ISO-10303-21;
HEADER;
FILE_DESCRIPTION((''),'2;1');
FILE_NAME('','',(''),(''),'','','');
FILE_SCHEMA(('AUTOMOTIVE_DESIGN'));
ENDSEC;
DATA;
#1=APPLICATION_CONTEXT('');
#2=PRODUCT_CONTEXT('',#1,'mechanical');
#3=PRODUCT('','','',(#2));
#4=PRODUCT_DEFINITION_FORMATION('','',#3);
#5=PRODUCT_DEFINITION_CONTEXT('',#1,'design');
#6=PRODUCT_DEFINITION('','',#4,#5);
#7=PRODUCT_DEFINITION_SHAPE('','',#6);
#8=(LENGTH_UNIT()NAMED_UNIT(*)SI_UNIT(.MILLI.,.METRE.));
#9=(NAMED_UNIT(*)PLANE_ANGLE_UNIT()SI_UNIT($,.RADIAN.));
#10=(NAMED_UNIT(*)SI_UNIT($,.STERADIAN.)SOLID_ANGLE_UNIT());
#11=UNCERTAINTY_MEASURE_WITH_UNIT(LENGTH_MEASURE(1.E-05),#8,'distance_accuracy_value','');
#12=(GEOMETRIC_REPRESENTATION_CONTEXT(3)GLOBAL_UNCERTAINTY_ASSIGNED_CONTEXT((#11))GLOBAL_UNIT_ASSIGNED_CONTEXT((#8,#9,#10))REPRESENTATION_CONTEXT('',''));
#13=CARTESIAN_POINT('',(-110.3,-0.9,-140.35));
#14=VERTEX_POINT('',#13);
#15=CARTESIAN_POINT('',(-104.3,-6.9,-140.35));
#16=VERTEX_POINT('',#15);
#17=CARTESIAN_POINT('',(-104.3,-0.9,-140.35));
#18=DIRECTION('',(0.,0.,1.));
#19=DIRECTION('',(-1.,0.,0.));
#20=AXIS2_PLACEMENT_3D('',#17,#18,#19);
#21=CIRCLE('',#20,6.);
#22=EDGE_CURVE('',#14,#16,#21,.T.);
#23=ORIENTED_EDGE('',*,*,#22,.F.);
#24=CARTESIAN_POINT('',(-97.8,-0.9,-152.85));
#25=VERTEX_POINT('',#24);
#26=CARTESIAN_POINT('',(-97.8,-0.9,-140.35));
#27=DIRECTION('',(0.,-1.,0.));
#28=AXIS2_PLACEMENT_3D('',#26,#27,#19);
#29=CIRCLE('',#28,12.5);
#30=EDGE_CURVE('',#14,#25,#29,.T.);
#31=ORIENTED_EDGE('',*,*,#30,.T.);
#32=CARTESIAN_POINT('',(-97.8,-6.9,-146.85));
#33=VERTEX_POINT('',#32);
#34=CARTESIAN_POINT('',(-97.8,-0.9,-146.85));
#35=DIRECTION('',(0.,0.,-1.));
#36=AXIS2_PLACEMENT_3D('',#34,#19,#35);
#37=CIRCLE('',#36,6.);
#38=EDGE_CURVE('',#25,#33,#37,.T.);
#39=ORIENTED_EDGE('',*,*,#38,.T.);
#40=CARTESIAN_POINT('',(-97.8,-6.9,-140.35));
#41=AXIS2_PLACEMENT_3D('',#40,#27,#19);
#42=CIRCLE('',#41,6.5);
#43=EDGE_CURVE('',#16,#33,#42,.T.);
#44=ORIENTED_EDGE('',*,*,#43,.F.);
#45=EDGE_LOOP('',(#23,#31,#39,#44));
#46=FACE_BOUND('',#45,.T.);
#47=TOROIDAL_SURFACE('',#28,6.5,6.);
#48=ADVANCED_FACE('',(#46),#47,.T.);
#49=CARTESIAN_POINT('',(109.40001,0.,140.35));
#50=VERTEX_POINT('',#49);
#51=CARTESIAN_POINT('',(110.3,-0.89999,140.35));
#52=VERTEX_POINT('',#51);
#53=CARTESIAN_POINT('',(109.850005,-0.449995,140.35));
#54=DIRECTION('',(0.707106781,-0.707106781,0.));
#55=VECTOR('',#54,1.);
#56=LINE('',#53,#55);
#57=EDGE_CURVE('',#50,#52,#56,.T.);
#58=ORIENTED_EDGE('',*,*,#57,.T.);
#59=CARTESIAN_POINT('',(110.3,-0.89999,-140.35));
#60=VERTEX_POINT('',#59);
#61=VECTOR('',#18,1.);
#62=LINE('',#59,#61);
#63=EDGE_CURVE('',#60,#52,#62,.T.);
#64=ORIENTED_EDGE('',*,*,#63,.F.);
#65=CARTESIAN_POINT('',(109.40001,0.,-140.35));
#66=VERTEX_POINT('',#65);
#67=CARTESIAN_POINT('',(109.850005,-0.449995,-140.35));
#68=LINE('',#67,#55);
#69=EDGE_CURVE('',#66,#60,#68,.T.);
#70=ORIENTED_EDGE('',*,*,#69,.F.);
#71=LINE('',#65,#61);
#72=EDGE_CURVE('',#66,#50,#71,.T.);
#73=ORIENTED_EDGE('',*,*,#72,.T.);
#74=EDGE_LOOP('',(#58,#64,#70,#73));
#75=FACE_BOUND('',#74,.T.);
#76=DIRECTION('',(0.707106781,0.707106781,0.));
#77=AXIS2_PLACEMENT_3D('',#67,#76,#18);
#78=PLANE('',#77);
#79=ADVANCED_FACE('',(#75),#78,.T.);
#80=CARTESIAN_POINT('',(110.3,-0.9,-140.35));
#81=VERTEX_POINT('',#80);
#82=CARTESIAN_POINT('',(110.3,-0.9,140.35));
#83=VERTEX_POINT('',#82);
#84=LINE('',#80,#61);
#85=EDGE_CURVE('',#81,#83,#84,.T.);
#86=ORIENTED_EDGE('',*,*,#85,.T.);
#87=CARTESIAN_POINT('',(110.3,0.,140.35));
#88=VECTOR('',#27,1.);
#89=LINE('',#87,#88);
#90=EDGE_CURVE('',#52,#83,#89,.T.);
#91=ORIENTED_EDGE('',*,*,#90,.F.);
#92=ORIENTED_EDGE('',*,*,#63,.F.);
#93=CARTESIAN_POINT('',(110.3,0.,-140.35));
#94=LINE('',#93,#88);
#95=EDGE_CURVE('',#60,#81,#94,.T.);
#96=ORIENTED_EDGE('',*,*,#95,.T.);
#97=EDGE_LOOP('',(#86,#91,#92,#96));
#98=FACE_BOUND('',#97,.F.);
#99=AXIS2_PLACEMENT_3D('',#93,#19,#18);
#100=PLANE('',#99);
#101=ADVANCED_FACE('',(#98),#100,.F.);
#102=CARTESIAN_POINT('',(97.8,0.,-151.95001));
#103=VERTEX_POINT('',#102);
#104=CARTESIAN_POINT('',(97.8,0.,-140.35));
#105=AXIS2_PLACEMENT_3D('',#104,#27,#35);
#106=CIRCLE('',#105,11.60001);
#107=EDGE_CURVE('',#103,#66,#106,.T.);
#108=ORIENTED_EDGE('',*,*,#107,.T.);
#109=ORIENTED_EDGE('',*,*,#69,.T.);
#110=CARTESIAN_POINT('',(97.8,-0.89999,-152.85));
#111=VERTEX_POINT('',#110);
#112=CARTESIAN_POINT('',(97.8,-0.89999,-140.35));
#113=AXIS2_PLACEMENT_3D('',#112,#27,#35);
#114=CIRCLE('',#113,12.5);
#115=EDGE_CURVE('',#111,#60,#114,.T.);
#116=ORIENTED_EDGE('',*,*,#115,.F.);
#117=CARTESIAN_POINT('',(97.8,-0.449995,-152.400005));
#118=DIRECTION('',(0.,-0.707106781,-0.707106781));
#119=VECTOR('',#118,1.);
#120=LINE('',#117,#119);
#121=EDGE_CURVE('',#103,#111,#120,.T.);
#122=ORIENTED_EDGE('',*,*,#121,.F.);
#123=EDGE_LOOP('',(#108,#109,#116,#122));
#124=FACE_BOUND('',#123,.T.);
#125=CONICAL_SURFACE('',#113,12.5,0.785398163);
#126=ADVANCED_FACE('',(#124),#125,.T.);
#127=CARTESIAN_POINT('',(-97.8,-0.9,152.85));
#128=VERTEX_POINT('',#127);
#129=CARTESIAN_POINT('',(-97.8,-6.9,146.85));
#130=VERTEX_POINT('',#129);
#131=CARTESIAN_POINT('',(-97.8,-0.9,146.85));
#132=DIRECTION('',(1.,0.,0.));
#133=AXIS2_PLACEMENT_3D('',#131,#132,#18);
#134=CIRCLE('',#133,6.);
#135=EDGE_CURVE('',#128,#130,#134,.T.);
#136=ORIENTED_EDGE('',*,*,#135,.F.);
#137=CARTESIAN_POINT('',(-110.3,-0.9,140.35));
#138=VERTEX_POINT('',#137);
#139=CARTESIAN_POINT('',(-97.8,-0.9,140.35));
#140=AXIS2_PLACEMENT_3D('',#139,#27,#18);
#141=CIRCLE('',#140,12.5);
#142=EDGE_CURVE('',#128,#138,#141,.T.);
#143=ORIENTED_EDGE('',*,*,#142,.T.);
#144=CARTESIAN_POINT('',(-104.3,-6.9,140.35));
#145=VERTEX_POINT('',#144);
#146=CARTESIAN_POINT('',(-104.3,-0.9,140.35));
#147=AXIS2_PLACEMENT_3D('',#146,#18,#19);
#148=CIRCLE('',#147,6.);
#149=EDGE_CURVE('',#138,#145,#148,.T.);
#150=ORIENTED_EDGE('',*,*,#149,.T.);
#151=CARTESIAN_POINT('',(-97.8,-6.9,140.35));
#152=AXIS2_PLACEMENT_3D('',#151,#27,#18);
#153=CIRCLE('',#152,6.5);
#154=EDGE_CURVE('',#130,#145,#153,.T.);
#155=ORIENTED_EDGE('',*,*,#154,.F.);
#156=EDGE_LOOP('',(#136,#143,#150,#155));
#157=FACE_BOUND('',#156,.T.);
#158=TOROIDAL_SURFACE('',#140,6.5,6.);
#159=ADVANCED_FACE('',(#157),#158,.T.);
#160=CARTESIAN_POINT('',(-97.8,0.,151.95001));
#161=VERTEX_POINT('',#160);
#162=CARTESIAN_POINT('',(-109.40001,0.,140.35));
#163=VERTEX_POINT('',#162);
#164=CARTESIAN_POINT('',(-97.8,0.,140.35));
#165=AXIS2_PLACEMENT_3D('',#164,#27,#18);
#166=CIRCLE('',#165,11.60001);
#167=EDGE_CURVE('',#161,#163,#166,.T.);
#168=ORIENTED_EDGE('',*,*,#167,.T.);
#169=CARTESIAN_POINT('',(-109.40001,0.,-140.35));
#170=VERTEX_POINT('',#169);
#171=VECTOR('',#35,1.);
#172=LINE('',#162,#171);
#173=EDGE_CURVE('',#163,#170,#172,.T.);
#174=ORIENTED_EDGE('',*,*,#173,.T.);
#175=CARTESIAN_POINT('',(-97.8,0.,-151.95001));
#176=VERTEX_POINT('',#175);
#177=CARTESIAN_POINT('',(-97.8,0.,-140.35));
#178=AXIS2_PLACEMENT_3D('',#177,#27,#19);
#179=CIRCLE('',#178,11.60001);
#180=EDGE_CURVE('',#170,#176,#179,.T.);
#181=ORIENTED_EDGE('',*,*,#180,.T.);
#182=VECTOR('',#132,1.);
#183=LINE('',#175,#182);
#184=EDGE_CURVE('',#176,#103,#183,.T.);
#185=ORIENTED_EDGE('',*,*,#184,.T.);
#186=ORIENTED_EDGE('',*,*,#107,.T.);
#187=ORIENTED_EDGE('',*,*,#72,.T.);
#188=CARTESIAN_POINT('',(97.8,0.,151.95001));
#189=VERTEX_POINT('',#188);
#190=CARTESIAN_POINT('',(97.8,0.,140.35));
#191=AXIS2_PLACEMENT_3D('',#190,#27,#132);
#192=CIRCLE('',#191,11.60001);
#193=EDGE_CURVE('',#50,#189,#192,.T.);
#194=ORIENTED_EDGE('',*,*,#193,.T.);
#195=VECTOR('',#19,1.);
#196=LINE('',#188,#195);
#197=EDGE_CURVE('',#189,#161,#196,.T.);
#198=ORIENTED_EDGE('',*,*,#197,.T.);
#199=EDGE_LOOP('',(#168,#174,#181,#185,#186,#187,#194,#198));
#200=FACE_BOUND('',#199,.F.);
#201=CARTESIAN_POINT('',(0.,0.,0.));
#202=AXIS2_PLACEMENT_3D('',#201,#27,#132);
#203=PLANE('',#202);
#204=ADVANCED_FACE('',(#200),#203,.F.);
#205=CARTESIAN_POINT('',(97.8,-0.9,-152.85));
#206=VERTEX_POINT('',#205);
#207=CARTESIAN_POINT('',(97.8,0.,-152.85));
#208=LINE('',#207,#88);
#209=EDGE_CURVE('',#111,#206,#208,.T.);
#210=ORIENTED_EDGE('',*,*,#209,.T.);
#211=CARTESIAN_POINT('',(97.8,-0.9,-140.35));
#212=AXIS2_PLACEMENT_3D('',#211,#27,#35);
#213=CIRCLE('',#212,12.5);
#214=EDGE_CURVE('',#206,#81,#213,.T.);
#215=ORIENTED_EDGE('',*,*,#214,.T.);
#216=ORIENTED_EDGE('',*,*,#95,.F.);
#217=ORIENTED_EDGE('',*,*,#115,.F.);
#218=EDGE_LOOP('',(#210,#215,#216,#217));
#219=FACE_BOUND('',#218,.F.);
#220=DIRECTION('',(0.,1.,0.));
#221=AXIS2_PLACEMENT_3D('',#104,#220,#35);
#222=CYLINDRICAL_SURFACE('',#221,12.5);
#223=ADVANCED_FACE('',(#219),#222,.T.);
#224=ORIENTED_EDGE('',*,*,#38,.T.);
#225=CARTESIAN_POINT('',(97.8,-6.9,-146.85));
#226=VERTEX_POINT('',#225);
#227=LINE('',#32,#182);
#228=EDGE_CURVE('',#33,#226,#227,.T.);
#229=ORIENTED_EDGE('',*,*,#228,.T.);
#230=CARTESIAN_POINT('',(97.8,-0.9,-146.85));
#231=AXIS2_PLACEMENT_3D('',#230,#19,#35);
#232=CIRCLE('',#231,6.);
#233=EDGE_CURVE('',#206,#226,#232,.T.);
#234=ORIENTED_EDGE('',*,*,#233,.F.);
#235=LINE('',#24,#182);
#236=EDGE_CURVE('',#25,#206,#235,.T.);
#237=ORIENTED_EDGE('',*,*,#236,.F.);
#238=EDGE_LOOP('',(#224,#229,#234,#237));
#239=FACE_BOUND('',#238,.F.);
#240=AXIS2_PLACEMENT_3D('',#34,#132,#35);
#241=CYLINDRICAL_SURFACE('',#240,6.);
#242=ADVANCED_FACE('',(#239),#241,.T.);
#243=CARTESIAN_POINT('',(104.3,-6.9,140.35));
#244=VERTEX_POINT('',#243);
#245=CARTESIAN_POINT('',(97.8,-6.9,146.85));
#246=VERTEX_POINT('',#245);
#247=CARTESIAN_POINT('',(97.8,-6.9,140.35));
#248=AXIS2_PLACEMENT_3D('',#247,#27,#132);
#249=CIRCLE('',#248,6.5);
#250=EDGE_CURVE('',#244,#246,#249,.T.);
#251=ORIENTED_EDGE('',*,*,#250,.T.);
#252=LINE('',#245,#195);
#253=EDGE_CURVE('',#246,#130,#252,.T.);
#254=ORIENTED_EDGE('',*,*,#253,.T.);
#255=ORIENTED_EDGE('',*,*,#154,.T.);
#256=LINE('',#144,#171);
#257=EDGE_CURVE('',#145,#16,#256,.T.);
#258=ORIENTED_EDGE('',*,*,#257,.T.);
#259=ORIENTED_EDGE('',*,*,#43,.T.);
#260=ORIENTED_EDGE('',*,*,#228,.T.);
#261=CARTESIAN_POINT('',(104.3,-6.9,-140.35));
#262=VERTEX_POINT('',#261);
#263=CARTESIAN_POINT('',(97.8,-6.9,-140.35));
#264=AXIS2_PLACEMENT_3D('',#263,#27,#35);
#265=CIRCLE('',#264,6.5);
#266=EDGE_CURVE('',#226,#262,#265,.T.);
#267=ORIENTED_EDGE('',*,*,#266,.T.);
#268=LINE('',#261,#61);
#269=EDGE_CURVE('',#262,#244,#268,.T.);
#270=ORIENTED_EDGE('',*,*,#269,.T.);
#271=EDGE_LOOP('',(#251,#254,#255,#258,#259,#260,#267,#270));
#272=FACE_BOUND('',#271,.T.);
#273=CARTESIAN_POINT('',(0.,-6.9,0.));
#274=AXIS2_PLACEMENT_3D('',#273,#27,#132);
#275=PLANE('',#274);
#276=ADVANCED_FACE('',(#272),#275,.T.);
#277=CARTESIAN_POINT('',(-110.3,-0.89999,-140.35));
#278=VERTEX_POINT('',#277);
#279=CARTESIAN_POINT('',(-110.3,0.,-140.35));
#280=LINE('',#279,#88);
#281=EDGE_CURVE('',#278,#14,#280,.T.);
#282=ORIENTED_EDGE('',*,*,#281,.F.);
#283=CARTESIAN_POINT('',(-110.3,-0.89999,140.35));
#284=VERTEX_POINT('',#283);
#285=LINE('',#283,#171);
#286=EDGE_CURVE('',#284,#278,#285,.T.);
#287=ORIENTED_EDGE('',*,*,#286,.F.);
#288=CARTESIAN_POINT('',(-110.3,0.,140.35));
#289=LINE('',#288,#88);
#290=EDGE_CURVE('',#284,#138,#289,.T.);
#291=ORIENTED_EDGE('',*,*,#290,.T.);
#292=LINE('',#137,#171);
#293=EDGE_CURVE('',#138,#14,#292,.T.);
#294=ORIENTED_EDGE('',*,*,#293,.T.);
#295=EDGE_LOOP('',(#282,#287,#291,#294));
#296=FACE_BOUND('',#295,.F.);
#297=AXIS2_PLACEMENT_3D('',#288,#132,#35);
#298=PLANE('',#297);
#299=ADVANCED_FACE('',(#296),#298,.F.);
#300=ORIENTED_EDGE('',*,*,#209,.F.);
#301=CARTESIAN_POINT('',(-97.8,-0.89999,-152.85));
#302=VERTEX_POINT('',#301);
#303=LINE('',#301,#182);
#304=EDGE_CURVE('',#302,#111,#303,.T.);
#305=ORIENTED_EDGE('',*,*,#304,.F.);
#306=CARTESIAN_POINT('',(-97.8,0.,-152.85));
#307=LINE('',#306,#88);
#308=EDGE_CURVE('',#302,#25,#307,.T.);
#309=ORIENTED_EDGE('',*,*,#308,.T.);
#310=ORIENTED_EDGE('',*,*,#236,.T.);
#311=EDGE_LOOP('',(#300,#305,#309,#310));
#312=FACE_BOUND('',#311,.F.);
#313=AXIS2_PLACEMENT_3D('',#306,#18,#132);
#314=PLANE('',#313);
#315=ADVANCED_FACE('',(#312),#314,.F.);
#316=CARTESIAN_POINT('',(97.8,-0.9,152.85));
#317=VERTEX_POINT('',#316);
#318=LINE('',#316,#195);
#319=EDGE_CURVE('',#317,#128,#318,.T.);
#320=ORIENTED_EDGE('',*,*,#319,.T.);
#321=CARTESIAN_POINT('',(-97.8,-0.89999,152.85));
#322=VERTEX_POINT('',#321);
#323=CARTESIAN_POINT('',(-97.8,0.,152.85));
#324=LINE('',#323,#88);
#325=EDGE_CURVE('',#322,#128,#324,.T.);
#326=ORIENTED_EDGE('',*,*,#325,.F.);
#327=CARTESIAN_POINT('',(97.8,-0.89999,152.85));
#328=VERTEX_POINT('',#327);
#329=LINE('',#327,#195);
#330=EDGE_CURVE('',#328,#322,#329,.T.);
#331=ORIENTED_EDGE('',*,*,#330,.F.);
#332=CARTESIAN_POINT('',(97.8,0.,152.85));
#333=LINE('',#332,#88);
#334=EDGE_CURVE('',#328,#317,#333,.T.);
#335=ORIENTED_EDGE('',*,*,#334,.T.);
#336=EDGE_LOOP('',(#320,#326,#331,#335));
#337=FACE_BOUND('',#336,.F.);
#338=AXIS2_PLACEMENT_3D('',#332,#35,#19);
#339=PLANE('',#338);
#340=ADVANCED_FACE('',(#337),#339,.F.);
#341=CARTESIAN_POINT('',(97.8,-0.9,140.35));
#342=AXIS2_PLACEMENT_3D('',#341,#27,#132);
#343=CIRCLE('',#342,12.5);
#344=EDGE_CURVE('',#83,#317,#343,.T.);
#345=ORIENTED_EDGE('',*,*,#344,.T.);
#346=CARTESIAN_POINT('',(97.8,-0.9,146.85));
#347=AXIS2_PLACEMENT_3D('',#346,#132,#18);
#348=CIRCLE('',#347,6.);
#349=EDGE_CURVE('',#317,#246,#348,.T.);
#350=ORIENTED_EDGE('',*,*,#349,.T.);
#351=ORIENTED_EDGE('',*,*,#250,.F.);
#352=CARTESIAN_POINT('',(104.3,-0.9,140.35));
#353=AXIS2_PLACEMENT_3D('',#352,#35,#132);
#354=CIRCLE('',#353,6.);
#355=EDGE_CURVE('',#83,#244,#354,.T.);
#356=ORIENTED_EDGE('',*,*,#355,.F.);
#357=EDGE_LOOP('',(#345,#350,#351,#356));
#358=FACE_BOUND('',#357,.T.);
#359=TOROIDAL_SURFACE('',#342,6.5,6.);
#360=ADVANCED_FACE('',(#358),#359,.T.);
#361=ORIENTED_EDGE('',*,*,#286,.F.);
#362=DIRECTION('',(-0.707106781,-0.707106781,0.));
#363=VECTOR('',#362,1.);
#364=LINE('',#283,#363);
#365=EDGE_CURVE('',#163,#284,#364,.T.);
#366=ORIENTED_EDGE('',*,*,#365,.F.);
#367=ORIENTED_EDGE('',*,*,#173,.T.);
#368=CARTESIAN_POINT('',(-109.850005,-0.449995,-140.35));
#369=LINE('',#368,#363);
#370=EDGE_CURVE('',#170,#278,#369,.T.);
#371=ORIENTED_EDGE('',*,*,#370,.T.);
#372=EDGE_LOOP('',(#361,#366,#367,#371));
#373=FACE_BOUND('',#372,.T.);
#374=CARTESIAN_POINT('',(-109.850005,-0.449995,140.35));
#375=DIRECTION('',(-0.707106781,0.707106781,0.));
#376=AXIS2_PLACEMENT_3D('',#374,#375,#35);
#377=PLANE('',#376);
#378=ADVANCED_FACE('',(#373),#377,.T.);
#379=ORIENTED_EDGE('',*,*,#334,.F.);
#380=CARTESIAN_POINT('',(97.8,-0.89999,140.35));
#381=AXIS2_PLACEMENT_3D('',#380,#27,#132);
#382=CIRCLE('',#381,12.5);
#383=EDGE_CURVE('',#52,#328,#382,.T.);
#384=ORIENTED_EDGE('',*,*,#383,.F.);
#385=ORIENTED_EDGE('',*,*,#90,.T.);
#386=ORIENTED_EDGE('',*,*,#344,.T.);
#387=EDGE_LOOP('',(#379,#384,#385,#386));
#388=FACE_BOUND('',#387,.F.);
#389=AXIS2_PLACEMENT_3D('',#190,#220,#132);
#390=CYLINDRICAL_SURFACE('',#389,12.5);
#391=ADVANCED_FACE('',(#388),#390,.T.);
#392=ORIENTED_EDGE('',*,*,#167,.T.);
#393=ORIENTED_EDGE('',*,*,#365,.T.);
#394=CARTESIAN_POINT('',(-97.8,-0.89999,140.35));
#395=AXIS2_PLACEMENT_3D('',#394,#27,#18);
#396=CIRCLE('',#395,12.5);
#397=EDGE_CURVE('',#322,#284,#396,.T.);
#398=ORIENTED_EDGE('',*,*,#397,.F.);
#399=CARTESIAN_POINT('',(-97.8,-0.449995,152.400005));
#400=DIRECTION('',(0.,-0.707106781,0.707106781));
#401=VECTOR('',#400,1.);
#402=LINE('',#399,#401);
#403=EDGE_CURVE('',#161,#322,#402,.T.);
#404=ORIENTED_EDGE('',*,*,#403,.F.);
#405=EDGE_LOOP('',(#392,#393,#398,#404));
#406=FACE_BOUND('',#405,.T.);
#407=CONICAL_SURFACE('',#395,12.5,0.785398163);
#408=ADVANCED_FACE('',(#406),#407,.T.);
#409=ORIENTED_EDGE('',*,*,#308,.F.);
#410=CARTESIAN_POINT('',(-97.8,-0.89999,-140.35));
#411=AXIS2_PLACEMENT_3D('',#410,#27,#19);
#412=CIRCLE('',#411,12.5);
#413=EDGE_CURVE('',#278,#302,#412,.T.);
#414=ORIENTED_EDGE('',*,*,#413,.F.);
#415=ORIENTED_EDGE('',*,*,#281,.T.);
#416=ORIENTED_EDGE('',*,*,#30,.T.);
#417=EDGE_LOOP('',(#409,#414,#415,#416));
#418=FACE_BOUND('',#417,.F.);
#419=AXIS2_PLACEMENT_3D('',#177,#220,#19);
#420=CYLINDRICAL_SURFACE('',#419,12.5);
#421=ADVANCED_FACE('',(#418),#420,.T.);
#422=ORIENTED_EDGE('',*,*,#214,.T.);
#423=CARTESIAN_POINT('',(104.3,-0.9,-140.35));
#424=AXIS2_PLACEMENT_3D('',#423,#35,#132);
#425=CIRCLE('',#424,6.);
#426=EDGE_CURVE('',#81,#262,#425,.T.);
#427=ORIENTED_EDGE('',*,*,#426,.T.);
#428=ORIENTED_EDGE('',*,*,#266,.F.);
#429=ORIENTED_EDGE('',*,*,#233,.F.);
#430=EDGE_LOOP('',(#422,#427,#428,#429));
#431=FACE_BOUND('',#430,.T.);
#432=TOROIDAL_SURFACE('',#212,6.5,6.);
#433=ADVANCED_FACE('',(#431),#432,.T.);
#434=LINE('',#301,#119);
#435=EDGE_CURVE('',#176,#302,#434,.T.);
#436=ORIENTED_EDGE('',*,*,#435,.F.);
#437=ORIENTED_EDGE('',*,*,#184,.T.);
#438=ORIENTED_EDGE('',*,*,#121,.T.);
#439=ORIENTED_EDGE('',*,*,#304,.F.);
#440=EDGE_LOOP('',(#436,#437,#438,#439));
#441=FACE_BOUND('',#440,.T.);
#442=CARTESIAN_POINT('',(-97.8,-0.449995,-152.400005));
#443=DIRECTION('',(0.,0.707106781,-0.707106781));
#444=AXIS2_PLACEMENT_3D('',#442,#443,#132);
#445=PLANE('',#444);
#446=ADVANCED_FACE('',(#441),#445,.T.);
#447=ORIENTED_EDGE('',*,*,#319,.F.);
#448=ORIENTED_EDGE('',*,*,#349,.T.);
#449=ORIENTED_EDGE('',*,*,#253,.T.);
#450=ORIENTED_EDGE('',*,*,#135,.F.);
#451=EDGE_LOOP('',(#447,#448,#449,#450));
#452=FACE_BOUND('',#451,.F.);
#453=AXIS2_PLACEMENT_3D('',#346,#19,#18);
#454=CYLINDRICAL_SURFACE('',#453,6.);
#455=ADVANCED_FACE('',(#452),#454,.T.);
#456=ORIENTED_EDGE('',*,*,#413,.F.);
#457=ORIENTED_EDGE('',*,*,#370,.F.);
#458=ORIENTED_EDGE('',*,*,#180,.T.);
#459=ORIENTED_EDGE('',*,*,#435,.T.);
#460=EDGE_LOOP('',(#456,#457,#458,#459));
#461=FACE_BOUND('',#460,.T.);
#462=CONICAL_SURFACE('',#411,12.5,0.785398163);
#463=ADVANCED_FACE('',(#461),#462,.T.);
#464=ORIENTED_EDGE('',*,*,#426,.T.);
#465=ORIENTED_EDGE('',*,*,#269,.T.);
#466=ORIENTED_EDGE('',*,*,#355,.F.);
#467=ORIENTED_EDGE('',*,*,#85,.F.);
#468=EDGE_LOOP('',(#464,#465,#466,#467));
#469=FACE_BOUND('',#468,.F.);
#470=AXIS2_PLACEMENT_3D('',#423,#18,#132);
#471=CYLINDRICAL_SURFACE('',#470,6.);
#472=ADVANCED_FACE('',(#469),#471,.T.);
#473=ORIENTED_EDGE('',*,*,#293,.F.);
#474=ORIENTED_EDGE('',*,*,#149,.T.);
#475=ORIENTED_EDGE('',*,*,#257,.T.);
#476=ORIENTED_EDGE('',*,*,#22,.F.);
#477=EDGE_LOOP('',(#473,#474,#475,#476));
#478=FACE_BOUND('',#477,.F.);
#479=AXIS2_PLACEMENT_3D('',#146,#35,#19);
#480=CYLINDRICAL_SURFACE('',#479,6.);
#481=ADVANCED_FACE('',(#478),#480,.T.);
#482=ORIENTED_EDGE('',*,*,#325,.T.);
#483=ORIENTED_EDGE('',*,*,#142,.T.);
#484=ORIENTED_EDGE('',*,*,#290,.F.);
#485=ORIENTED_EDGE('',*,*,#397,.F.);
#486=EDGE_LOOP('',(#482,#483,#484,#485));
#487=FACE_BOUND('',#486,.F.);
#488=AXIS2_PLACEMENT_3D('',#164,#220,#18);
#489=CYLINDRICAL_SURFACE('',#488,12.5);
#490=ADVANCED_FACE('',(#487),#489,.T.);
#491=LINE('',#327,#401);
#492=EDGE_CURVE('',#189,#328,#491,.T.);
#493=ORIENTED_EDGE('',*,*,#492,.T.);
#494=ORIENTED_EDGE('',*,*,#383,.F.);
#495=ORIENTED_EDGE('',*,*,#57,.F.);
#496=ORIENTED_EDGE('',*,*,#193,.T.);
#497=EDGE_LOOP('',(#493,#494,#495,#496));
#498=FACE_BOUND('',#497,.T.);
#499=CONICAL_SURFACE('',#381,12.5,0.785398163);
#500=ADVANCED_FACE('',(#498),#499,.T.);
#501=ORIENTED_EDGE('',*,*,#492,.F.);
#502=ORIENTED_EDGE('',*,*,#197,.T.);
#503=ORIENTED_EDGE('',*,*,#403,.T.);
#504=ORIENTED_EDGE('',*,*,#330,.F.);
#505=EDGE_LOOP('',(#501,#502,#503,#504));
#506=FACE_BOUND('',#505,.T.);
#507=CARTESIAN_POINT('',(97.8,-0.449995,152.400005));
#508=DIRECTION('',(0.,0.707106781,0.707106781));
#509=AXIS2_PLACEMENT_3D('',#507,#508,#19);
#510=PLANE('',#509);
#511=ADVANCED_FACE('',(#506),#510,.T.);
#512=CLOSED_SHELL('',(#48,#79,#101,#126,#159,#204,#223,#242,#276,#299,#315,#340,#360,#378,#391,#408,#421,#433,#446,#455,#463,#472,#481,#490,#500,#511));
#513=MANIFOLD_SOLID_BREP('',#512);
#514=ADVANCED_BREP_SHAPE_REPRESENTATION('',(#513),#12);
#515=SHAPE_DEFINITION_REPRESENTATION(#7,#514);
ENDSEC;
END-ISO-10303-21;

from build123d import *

# Parameters (mm, degrees)
F1_DEPTH = 6.9
F2_R     = 6
F3_SIZE  = 0.89999


# Not quite as in the source:
# - a fillet or chamfer is up to 0.001 mm smaller than in the source, because OpenCascade refuses the exact size


with BuildPart() as f1:
    # F0 (on Front) → F1 (new body)
    with BuildSketch(Plane.XZ):
        with BuildLine():
            Line((97.8, 152.85), (-97.8, 152.85))
            ThreePointArc((-97.8, 152.85), (-106.6388347648, 149.1888347648), (-110.3, 140.35))
            Line((-110.3, 140.35), (-110.3, -140.35))
            ThreePointArc((-110.3, -140.35), (-106.6388347648, -149.1888347648), (-97.8, -152.85))
            Line((-97.8, -152.85), (97.8, -152.85))
            ThreePointArc((97.8, -152.85), (106.6388347648, -149.1888347648), (110.3, -140.35))
            Line((110.3, -140.35), (110.3, 140.35))
            ThreePointArc((110.3, 140.35), (106.6388347648, 149.1888347648), (97.8, 152.85))
        make_face()
    extrude(amount=F1_DEPTH)

    # F2
    f2_edges = [f1.edges().sort_by_distance(p)[0] for p in [
        (110.3, -6.9, 0),
        (106.638835, -6.9, 149.188835),
        (0, -6.9, 152.85),
        (-106.638835, -6.9, 149.188835),
        (-110.3, -6.9, 0),
        (-106.638835, -6.9, -149.188835),
        (0, -6.9, -152.85),
        (106.638835, -6.9, -149.188835),
    ]]
    fillet(f2_edges, radius=F2_R)

    # F3 (size 0.9 in the source; OpenCascade refuses exactly that, so slightly less here)
    f3_edges = [f1.edges().sort_by_distance(p)[0] for p in [
        (110.3, 0, 0),
        (106.638835, 0, 149.188835),
        (0, 0, 152.85),
        (-106.638835, 0, 149.188835),
        (-110.3, 0, 0),
        (-106.638835, 0, -149.188835),
        (0, 0, -152.85),
        (106.638835, 0, -149.188835),
    ]]
    chamfer(f3_edges, length=F3_SIZE)


solid = f1.part
